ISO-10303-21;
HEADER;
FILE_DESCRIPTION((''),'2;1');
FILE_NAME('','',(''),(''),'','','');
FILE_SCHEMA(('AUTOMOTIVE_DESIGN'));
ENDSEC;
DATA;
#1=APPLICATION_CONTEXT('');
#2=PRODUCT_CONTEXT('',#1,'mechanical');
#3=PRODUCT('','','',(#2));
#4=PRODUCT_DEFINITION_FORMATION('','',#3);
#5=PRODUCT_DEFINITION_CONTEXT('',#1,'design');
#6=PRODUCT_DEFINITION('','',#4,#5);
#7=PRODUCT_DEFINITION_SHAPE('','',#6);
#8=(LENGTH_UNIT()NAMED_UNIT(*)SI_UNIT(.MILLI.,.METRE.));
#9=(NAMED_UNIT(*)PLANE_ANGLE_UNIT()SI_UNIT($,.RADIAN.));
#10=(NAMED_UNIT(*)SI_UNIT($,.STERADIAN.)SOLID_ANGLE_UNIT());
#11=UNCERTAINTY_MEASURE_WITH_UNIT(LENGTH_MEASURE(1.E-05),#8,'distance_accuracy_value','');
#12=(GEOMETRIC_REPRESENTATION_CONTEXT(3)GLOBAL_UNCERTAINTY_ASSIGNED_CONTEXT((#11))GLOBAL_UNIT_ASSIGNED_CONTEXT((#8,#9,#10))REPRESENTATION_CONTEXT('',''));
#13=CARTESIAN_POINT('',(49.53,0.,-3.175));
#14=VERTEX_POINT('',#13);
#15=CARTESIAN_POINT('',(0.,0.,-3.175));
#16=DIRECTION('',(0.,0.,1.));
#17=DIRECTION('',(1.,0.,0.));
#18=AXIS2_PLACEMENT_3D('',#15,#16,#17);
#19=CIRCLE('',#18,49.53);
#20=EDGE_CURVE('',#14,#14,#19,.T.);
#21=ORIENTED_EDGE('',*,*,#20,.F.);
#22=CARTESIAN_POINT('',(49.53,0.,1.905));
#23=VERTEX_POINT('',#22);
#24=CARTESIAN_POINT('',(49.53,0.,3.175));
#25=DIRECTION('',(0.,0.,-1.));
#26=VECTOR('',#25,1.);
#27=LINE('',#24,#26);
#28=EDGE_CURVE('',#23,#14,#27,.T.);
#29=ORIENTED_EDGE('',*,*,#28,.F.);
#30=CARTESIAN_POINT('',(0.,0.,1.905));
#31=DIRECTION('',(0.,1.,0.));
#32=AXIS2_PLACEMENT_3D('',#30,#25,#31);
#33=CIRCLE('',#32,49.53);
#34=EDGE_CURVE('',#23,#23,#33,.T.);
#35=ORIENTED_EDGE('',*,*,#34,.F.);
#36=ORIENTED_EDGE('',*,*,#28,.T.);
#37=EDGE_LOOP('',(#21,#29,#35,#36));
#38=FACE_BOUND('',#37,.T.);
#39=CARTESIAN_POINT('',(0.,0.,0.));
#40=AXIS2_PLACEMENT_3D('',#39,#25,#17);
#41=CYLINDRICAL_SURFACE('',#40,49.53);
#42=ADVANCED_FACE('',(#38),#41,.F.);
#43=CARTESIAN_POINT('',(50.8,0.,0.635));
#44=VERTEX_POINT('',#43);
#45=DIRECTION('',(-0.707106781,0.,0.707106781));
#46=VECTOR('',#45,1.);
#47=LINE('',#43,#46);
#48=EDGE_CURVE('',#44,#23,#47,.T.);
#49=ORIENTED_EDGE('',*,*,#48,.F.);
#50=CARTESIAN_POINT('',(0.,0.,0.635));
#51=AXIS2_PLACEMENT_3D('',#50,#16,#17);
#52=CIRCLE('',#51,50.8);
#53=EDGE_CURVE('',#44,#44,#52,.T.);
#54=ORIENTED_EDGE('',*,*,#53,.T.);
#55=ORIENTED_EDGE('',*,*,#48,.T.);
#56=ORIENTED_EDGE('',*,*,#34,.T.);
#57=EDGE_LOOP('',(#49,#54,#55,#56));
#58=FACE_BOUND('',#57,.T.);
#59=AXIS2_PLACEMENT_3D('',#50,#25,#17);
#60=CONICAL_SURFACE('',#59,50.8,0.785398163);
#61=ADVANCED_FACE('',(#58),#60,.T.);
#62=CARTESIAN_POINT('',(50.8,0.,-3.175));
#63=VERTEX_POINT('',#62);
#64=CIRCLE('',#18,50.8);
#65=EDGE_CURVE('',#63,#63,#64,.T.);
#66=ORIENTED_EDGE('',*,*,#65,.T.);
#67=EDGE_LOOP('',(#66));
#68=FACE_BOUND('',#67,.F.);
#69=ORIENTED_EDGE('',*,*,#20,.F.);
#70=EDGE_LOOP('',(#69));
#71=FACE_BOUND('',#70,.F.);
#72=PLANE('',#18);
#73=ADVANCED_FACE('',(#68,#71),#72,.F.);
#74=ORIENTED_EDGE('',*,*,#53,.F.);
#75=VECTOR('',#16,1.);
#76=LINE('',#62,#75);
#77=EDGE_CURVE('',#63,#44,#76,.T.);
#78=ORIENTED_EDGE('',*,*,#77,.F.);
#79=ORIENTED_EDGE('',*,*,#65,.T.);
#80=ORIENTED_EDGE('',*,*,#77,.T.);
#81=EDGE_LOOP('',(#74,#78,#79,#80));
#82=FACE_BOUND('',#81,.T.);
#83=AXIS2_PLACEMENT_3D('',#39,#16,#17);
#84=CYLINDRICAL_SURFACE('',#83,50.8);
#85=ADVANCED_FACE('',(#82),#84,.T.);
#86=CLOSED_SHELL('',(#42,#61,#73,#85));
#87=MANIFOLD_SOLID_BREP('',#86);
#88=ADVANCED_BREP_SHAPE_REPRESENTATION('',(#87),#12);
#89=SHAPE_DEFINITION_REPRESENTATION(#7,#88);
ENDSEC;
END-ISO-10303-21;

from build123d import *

# Parameters (mm, degrees)
F0_R     = 50.8
F0_R_2   = 49.53
F1_DEPTH = 3.175


# Not quite as in the source:
# - a fillet or chamfer that OpenCascade refuses, or shapes differently, is made with other operations: its cross-section is extruded or revolved along the edge and cut away or added


with BuildPart() as f1:
    # F0 (on Top) → F1 (new body, symmetric)
    with BuildSketch(Plane.XY):
        Circle(F0_R)
        Circle(F0_R_2, mode=Mode.SUBTRACT)
    extrude(amount=F1_DEPTH, both=True)

    # F2: chamfer of 2.54 on 1 edges, made by hand

    # F2_s1 → F2_t2 (revolve, cut)
    with BuildSketch(Plane.XZ):
        Polygon((50.8, 0.635), (48.26, 3.175), (50.8, 3.175), align=None)
    revolve(axis=Axis((0, 0, 3.175), (0, 0, 1)), mode=Mode.SUBTRACT)


solid = f1.part
